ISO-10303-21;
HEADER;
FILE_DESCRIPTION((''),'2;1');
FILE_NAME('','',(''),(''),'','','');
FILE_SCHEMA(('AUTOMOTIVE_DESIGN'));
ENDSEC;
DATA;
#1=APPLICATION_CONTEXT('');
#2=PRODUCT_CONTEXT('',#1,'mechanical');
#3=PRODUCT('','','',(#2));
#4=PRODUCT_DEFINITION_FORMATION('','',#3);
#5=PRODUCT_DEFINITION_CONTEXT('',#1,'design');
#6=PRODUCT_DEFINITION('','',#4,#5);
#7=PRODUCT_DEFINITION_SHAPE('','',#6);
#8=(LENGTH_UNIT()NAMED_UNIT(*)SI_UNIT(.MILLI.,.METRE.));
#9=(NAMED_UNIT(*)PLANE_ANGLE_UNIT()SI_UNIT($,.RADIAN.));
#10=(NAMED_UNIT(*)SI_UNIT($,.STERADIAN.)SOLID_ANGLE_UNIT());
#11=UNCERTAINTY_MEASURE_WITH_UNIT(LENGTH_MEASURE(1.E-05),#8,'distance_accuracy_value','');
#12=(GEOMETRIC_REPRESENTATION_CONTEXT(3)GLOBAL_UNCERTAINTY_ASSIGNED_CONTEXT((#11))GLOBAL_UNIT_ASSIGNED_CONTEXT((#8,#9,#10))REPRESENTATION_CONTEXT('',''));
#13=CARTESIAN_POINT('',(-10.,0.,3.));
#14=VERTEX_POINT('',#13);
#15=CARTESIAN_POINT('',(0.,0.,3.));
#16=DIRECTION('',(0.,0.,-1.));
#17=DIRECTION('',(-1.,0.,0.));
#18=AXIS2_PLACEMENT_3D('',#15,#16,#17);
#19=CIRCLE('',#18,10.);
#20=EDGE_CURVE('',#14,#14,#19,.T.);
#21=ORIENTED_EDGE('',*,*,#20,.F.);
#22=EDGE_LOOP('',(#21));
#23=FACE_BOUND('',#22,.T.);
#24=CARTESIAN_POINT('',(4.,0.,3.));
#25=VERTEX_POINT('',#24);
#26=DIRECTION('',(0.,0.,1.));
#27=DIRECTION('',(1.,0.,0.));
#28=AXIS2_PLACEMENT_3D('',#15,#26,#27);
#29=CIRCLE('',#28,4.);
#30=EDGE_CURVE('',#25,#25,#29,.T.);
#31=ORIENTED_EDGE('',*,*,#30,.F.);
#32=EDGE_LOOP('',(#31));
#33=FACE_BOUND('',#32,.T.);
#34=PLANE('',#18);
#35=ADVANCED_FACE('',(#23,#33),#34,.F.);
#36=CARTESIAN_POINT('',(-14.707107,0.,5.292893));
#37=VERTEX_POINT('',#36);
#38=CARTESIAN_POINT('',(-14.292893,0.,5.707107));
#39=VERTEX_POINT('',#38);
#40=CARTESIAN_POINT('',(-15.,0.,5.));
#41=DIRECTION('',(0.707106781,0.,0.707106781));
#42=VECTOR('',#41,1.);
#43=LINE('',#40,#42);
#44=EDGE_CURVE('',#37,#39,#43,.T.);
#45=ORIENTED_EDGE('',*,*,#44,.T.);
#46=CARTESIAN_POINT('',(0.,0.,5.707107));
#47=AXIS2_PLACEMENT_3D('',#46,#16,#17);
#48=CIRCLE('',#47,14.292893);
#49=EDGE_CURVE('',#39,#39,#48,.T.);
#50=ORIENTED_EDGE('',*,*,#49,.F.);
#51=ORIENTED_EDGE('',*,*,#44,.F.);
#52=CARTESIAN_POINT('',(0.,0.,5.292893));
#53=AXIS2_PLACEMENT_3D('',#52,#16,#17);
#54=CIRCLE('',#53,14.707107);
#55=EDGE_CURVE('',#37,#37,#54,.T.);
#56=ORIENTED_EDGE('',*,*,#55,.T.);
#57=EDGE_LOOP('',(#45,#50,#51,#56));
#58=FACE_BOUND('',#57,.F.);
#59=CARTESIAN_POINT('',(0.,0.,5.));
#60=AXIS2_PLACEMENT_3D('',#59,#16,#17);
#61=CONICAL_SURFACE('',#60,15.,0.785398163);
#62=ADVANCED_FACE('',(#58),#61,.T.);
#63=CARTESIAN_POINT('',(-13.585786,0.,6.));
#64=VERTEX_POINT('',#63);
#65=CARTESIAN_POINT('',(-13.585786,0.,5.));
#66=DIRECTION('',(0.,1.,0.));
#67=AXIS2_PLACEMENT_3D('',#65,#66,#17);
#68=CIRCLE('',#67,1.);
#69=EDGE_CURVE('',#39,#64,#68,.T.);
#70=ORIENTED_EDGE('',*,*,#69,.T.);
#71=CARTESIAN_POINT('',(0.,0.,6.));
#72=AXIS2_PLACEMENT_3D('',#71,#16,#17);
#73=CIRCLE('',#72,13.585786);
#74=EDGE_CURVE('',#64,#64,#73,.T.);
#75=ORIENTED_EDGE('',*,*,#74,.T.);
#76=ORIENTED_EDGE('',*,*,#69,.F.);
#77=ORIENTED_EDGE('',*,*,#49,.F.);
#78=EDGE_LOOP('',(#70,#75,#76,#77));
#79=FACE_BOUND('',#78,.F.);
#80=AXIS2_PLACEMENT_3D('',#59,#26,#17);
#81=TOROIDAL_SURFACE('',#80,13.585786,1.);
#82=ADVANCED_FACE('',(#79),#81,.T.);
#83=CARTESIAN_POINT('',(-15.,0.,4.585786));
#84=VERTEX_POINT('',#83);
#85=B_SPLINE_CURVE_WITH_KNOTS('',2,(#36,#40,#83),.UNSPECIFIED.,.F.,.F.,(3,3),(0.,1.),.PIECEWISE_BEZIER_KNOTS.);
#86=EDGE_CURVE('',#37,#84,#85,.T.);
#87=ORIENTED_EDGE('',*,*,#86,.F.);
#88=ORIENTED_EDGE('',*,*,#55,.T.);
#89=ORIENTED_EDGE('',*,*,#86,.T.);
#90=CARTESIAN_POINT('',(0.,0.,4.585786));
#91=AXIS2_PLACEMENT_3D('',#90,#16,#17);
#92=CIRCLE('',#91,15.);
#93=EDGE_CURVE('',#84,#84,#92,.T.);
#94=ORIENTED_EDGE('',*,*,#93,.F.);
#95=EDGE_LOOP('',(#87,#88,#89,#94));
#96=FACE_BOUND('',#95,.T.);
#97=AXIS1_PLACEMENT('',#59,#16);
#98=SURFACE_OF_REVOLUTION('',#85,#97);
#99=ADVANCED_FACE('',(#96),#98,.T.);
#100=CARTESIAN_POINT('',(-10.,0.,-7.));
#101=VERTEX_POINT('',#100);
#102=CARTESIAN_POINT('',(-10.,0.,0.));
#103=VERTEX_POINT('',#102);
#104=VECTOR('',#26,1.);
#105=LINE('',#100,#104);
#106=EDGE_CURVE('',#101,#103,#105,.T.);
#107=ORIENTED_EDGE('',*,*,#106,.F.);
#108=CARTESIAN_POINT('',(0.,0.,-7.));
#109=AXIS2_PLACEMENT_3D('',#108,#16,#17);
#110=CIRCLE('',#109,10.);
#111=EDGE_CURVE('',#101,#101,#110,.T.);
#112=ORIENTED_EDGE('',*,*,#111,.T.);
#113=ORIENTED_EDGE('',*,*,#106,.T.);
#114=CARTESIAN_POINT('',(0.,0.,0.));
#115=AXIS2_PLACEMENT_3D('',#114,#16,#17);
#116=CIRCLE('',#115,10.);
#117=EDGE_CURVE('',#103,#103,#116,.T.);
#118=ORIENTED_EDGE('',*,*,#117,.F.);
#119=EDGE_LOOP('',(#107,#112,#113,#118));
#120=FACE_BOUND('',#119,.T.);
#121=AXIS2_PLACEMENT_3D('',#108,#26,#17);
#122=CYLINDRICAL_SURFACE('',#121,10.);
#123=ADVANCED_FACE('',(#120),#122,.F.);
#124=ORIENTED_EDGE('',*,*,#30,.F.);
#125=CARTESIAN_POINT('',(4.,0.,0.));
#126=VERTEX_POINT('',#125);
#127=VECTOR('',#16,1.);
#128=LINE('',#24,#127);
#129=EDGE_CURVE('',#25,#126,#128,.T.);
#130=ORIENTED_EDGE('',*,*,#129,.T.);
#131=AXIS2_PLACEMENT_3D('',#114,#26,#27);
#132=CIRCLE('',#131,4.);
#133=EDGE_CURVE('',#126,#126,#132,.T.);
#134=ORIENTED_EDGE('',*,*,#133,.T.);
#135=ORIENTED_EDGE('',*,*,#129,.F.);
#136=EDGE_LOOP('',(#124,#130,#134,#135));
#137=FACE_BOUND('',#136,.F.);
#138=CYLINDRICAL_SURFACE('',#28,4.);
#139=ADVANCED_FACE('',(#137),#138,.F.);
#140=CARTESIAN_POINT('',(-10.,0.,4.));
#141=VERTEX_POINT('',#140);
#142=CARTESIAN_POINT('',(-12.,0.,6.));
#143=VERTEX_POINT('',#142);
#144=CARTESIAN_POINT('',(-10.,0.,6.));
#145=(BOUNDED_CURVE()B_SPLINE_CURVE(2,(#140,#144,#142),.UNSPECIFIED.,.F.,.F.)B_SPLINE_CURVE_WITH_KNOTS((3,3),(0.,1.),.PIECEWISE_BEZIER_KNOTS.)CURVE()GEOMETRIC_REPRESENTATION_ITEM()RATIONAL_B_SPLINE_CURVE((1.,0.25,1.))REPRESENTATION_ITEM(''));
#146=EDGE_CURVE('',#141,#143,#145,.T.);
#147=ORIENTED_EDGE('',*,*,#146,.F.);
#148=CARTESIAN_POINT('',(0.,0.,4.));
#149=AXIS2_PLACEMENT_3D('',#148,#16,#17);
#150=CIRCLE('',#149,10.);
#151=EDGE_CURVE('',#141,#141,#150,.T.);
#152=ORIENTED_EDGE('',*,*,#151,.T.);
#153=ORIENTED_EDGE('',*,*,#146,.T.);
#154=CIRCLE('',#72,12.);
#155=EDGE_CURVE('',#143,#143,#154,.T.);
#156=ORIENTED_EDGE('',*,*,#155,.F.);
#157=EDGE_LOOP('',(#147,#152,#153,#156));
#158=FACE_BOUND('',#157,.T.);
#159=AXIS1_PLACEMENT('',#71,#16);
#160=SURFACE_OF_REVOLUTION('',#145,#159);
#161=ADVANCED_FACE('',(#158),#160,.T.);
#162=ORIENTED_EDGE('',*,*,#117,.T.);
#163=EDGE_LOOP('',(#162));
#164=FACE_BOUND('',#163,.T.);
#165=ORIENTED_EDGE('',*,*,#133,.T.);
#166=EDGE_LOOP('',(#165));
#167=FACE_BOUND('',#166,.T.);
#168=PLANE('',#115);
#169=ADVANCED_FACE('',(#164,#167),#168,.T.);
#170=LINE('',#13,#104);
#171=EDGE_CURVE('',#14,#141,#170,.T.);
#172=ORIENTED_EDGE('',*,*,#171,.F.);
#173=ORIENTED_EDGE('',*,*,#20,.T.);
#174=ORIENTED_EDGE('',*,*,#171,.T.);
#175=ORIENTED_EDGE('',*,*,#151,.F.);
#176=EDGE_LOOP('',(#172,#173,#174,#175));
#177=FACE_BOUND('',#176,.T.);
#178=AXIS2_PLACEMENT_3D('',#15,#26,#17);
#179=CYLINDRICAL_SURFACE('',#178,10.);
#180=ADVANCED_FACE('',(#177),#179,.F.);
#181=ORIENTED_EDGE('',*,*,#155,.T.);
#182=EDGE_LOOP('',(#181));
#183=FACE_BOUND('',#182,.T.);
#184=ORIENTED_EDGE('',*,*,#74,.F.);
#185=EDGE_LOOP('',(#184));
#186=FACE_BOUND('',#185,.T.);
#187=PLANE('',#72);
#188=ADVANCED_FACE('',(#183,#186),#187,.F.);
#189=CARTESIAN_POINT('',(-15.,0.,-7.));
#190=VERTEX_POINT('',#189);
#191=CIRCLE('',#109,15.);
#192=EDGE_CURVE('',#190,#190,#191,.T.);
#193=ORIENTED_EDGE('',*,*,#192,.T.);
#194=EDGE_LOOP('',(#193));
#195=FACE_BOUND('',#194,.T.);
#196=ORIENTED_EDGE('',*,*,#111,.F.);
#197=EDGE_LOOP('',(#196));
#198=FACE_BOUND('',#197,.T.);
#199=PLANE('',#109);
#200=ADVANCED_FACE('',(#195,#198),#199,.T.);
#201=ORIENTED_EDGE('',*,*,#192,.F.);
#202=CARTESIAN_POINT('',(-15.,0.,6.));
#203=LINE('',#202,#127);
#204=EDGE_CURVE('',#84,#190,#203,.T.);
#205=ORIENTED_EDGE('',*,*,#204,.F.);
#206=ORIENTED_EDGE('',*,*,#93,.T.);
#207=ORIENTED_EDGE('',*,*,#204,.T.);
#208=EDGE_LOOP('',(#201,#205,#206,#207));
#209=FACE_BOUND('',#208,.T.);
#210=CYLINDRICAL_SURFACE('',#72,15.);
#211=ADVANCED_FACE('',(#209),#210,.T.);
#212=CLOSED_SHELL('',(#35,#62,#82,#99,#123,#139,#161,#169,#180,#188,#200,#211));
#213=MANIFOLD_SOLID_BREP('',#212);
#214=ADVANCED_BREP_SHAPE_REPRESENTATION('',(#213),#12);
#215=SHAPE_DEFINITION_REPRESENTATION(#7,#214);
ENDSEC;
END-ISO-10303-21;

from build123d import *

# Parameters (mm, degrees)
F2_R     = 4
F3_DEPTH = 25
F5_SIZE  = 1
F6_R     = 1


# Not quite as in the source:
# - a fillet or chamfer that OpenCascade refuses, or shapes differently, is made with other operations: its cross-section is extruded or revolved along the edge and cut away or added


with BuildPart() as f1:
    # F0 (on Front) → F1 (revolve)
    with BuildSketch(Plane.XZ):
        Polygon((-10, 0), (0, 0), (0, 3), (-10, 3), (-10, 6), (-15, 6), (-15, -7), (-10, -7), align=None)
    revolve(axis=Axis((0, 0, 1.5), (0, 0, -1)))

    # F2 (on face) → F3 (cut)
    with BuildSketch(Plane.XY.offset(3)):
        Circle(F2_R)
    extrude(amount=-F3_DEPTH, mode=Mode.SUBTRACT)

    # F4: fillet of radius 2 on 1 edges, made by hand

    # F4_s1 → F4_t2 (revolve, cut)
    with BuildSketch(Plane.XZ):
        with BuildLine():
            add(Edge.make_bspline(
                [(-10, 4), (-10, 6), (-12, 6)],
                knots=[0, 0, 0, 1, 1, 1], degree=2, weights=[1, 0.25, 1]))
            Line((-12, 6), (-10, 6))
            Line((-10, 6), (-10, 4))
        make_face()
    revolve(axis=Axis((0, 0, 6), (0, 0, -1)), mode=Mode.SUBTRACT)

    # F5
    f5_edges = [f1.edges().sort_by_distance(p)[0] for p in [
        (15, 0, 6),
    ]]
    chamfer(f5_edges, length=F5_SIZE)

    # F6
    f6_edges = [f1.edges().sort_by_distance(p)[0] for p in [
        (14, 0, 6),
    ]]
    fillet(f6_edges, radius=F6_R)

    # F7: fillet of radius 1 on 1 edges, made by hand

    # F7_s1 → F7_t2 (revolve, cut)
    with BuildSketch(Plane.XZ):
        with BuildLine():
            add(Edge.make_bspline(
                [(-14.7071067812, 5.2928932188), (-15, 5), (-15, 4.5857864376)],
                knots=[0, 0, 0, 1, 1, 1], degree=2, weights=[1, 1, 1]))
            Line((-15, 4.5857864376), (-15, 5))
            Line((-15, 5), (-14.7071067812, 5.2928932188))
        make_face()
    revolve(axis=Axis((0, 0, 5), (0, 0, -1)), mode=Mode.SUBTRACT)


solid = f1.part
